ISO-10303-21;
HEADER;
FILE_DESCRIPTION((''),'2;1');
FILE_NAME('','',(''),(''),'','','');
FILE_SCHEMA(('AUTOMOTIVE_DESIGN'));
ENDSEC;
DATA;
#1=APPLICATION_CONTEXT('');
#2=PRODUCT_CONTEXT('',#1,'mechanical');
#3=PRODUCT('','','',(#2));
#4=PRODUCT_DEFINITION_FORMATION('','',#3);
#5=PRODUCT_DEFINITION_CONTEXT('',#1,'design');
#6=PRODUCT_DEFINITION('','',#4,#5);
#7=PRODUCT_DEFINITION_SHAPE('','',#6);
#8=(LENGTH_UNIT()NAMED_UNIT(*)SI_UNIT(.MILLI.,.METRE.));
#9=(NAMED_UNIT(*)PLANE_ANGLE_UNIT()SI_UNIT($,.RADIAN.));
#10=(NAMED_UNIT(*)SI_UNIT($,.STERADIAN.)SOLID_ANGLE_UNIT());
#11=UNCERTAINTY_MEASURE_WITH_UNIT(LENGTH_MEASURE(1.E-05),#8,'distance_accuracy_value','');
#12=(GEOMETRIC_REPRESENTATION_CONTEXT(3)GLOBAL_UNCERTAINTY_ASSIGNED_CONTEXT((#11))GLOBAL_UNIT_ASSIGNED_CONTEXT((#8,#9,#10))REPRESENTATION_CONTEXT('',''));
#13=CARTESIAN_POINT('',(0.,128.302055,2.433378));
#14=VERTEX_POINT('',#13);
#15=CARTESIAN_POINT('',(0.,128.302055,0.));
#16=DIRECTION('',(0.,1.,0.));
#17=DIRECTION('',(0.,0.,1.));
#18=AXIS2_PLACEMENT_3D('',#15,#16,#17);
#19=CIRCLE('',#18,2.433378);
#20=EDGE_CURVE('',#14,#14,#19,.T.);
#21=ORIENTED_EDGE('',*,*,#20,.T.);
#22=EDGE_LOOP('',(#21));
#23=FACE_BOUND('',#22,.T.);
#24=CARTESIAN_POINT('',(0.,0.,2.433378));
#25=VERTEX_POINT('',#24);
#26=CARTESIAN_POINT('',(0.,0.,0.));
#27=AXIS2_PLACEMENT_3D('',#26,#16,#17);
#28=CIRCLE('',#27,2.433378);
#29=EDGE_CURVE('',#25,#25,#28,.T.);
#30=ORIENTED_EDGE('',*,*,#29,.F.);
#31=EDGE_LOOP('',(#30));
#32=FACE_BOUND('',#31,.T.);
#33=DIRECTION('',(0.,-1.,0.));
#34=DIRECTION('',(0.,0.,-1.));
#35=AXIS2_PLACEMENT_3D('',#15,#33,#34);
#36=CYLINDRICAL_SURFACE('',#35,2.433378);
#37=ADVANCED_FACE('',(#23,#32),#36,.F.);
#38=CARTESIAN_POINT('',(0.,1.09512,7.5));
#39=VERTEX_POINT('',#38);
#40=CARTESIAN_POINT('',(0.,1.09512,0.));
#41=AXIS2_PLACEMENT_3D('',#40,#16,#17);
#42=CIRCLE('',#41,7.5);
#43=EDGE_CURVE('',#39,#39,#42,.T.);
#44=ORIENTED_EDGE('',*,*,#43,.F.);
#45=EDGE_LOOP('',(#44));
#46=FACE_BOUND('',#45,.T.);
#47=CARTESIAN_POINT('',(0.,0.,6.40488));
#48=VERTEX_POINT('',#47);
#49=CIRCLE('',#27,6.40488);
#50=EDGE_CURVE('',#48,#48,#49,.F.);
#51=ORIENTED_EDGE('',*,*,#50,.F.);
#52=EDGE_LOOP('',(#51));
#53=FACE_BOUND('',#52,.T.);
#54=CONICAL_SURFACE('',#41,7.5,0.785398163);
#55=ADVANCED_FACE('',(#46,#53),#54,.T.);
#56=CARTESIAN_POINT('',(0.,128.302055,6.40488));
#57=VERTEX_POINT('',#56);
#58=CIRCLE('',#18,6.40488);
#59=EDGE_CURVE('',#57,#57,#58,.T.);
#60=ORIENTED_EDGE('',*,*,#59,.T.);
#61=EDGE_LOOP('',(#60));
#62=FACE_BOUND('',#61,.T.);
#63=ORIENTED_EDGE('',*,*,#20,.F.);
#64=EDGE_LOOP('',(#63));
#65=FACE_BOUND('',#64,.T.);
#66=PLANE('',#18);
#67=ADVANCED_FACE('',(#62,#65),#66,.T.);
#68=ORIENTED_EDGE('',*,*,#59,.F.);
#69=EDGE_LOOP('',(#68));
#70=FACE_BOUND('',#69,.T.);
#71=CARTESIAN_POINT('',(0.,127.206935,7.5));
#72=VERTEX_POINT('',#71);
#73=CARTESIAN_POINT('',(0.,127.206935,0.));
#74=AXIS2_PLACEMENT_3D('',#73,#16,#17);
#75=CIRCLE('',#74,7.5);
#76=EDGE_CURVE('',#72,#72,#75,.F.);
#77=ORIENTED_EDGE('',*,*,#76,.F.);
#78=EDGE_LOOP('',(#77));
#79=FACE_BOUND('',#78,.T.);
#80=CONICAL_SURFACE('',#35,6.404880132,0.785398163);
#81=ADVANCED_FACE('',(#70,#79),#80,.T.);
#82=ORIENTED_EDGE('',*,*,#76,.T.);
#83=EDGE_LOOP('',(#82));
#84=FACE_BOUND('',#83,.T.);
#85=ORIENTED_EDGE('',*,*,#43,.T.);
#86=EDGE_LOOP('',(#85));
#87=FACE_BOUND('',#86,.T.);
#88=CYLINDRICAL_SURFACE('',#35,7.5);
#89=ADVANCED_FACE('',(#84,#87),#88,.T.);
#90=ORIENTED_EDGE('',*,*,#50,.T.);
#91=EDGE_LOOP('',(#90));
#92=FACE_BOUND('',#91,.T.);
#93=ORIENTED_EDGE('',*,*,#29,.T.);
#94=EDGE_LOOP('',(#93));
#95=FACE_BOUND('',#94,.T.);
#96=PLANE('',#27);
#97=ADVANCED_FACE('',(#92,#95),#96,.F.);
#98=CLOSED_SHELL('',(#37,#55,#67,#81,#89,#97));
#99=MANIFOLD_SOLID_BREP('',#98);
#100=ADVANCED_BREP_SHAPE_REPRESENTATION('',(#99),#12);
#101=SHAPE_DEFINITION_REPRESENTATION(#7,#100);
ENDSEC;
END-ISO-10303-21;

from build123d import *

# Parameters (mm, degrees)
SKETCH1_R           = 7.5
BOSS_EXTRUDE1_DEPTH = 128.302054556
SKETCH2_R           = 2.433378273
CUT_EXTRUDE1_DEPTH  = 129.739726593
CHAMFER1_SIZE       = 1.095119868


with BuildPart() as part:
    # Sketch1 → Boss-Extrude1 (new body)
    with BuildSketch(Plane(origin=(0, 0, 0), x_dir=(1, 0, 0), z_dir=(0, 1, 0))):
        Circle(SKETCH1_R)
    extrude(amount=BOSS_EXTRUDE1_DEPTH)

    # Sketch2 → Cut-Extrude1 (cut, through all)
    with BuildSketch(Plane(origin=(0, 0, 0), x_dir=(1, 0, 0), z_dir=(0, 1, 0))):
        Circle(SKETCH2_R)
    extrude(amount=CUT_EXTRUDE1_DEPTH, mode=Mode.SUBTRACT)

    # Chamfer1
    chamfer1_edges = [part.edges().sort_by_distance(p)[0] for p in [
        (-7.5, 128.302054556, 0),
        (-7.5, 0, 0),
    ]]
    chamfer(chamfer1_edges, length=CHAMFER1_SIZE)


solid = part.part
